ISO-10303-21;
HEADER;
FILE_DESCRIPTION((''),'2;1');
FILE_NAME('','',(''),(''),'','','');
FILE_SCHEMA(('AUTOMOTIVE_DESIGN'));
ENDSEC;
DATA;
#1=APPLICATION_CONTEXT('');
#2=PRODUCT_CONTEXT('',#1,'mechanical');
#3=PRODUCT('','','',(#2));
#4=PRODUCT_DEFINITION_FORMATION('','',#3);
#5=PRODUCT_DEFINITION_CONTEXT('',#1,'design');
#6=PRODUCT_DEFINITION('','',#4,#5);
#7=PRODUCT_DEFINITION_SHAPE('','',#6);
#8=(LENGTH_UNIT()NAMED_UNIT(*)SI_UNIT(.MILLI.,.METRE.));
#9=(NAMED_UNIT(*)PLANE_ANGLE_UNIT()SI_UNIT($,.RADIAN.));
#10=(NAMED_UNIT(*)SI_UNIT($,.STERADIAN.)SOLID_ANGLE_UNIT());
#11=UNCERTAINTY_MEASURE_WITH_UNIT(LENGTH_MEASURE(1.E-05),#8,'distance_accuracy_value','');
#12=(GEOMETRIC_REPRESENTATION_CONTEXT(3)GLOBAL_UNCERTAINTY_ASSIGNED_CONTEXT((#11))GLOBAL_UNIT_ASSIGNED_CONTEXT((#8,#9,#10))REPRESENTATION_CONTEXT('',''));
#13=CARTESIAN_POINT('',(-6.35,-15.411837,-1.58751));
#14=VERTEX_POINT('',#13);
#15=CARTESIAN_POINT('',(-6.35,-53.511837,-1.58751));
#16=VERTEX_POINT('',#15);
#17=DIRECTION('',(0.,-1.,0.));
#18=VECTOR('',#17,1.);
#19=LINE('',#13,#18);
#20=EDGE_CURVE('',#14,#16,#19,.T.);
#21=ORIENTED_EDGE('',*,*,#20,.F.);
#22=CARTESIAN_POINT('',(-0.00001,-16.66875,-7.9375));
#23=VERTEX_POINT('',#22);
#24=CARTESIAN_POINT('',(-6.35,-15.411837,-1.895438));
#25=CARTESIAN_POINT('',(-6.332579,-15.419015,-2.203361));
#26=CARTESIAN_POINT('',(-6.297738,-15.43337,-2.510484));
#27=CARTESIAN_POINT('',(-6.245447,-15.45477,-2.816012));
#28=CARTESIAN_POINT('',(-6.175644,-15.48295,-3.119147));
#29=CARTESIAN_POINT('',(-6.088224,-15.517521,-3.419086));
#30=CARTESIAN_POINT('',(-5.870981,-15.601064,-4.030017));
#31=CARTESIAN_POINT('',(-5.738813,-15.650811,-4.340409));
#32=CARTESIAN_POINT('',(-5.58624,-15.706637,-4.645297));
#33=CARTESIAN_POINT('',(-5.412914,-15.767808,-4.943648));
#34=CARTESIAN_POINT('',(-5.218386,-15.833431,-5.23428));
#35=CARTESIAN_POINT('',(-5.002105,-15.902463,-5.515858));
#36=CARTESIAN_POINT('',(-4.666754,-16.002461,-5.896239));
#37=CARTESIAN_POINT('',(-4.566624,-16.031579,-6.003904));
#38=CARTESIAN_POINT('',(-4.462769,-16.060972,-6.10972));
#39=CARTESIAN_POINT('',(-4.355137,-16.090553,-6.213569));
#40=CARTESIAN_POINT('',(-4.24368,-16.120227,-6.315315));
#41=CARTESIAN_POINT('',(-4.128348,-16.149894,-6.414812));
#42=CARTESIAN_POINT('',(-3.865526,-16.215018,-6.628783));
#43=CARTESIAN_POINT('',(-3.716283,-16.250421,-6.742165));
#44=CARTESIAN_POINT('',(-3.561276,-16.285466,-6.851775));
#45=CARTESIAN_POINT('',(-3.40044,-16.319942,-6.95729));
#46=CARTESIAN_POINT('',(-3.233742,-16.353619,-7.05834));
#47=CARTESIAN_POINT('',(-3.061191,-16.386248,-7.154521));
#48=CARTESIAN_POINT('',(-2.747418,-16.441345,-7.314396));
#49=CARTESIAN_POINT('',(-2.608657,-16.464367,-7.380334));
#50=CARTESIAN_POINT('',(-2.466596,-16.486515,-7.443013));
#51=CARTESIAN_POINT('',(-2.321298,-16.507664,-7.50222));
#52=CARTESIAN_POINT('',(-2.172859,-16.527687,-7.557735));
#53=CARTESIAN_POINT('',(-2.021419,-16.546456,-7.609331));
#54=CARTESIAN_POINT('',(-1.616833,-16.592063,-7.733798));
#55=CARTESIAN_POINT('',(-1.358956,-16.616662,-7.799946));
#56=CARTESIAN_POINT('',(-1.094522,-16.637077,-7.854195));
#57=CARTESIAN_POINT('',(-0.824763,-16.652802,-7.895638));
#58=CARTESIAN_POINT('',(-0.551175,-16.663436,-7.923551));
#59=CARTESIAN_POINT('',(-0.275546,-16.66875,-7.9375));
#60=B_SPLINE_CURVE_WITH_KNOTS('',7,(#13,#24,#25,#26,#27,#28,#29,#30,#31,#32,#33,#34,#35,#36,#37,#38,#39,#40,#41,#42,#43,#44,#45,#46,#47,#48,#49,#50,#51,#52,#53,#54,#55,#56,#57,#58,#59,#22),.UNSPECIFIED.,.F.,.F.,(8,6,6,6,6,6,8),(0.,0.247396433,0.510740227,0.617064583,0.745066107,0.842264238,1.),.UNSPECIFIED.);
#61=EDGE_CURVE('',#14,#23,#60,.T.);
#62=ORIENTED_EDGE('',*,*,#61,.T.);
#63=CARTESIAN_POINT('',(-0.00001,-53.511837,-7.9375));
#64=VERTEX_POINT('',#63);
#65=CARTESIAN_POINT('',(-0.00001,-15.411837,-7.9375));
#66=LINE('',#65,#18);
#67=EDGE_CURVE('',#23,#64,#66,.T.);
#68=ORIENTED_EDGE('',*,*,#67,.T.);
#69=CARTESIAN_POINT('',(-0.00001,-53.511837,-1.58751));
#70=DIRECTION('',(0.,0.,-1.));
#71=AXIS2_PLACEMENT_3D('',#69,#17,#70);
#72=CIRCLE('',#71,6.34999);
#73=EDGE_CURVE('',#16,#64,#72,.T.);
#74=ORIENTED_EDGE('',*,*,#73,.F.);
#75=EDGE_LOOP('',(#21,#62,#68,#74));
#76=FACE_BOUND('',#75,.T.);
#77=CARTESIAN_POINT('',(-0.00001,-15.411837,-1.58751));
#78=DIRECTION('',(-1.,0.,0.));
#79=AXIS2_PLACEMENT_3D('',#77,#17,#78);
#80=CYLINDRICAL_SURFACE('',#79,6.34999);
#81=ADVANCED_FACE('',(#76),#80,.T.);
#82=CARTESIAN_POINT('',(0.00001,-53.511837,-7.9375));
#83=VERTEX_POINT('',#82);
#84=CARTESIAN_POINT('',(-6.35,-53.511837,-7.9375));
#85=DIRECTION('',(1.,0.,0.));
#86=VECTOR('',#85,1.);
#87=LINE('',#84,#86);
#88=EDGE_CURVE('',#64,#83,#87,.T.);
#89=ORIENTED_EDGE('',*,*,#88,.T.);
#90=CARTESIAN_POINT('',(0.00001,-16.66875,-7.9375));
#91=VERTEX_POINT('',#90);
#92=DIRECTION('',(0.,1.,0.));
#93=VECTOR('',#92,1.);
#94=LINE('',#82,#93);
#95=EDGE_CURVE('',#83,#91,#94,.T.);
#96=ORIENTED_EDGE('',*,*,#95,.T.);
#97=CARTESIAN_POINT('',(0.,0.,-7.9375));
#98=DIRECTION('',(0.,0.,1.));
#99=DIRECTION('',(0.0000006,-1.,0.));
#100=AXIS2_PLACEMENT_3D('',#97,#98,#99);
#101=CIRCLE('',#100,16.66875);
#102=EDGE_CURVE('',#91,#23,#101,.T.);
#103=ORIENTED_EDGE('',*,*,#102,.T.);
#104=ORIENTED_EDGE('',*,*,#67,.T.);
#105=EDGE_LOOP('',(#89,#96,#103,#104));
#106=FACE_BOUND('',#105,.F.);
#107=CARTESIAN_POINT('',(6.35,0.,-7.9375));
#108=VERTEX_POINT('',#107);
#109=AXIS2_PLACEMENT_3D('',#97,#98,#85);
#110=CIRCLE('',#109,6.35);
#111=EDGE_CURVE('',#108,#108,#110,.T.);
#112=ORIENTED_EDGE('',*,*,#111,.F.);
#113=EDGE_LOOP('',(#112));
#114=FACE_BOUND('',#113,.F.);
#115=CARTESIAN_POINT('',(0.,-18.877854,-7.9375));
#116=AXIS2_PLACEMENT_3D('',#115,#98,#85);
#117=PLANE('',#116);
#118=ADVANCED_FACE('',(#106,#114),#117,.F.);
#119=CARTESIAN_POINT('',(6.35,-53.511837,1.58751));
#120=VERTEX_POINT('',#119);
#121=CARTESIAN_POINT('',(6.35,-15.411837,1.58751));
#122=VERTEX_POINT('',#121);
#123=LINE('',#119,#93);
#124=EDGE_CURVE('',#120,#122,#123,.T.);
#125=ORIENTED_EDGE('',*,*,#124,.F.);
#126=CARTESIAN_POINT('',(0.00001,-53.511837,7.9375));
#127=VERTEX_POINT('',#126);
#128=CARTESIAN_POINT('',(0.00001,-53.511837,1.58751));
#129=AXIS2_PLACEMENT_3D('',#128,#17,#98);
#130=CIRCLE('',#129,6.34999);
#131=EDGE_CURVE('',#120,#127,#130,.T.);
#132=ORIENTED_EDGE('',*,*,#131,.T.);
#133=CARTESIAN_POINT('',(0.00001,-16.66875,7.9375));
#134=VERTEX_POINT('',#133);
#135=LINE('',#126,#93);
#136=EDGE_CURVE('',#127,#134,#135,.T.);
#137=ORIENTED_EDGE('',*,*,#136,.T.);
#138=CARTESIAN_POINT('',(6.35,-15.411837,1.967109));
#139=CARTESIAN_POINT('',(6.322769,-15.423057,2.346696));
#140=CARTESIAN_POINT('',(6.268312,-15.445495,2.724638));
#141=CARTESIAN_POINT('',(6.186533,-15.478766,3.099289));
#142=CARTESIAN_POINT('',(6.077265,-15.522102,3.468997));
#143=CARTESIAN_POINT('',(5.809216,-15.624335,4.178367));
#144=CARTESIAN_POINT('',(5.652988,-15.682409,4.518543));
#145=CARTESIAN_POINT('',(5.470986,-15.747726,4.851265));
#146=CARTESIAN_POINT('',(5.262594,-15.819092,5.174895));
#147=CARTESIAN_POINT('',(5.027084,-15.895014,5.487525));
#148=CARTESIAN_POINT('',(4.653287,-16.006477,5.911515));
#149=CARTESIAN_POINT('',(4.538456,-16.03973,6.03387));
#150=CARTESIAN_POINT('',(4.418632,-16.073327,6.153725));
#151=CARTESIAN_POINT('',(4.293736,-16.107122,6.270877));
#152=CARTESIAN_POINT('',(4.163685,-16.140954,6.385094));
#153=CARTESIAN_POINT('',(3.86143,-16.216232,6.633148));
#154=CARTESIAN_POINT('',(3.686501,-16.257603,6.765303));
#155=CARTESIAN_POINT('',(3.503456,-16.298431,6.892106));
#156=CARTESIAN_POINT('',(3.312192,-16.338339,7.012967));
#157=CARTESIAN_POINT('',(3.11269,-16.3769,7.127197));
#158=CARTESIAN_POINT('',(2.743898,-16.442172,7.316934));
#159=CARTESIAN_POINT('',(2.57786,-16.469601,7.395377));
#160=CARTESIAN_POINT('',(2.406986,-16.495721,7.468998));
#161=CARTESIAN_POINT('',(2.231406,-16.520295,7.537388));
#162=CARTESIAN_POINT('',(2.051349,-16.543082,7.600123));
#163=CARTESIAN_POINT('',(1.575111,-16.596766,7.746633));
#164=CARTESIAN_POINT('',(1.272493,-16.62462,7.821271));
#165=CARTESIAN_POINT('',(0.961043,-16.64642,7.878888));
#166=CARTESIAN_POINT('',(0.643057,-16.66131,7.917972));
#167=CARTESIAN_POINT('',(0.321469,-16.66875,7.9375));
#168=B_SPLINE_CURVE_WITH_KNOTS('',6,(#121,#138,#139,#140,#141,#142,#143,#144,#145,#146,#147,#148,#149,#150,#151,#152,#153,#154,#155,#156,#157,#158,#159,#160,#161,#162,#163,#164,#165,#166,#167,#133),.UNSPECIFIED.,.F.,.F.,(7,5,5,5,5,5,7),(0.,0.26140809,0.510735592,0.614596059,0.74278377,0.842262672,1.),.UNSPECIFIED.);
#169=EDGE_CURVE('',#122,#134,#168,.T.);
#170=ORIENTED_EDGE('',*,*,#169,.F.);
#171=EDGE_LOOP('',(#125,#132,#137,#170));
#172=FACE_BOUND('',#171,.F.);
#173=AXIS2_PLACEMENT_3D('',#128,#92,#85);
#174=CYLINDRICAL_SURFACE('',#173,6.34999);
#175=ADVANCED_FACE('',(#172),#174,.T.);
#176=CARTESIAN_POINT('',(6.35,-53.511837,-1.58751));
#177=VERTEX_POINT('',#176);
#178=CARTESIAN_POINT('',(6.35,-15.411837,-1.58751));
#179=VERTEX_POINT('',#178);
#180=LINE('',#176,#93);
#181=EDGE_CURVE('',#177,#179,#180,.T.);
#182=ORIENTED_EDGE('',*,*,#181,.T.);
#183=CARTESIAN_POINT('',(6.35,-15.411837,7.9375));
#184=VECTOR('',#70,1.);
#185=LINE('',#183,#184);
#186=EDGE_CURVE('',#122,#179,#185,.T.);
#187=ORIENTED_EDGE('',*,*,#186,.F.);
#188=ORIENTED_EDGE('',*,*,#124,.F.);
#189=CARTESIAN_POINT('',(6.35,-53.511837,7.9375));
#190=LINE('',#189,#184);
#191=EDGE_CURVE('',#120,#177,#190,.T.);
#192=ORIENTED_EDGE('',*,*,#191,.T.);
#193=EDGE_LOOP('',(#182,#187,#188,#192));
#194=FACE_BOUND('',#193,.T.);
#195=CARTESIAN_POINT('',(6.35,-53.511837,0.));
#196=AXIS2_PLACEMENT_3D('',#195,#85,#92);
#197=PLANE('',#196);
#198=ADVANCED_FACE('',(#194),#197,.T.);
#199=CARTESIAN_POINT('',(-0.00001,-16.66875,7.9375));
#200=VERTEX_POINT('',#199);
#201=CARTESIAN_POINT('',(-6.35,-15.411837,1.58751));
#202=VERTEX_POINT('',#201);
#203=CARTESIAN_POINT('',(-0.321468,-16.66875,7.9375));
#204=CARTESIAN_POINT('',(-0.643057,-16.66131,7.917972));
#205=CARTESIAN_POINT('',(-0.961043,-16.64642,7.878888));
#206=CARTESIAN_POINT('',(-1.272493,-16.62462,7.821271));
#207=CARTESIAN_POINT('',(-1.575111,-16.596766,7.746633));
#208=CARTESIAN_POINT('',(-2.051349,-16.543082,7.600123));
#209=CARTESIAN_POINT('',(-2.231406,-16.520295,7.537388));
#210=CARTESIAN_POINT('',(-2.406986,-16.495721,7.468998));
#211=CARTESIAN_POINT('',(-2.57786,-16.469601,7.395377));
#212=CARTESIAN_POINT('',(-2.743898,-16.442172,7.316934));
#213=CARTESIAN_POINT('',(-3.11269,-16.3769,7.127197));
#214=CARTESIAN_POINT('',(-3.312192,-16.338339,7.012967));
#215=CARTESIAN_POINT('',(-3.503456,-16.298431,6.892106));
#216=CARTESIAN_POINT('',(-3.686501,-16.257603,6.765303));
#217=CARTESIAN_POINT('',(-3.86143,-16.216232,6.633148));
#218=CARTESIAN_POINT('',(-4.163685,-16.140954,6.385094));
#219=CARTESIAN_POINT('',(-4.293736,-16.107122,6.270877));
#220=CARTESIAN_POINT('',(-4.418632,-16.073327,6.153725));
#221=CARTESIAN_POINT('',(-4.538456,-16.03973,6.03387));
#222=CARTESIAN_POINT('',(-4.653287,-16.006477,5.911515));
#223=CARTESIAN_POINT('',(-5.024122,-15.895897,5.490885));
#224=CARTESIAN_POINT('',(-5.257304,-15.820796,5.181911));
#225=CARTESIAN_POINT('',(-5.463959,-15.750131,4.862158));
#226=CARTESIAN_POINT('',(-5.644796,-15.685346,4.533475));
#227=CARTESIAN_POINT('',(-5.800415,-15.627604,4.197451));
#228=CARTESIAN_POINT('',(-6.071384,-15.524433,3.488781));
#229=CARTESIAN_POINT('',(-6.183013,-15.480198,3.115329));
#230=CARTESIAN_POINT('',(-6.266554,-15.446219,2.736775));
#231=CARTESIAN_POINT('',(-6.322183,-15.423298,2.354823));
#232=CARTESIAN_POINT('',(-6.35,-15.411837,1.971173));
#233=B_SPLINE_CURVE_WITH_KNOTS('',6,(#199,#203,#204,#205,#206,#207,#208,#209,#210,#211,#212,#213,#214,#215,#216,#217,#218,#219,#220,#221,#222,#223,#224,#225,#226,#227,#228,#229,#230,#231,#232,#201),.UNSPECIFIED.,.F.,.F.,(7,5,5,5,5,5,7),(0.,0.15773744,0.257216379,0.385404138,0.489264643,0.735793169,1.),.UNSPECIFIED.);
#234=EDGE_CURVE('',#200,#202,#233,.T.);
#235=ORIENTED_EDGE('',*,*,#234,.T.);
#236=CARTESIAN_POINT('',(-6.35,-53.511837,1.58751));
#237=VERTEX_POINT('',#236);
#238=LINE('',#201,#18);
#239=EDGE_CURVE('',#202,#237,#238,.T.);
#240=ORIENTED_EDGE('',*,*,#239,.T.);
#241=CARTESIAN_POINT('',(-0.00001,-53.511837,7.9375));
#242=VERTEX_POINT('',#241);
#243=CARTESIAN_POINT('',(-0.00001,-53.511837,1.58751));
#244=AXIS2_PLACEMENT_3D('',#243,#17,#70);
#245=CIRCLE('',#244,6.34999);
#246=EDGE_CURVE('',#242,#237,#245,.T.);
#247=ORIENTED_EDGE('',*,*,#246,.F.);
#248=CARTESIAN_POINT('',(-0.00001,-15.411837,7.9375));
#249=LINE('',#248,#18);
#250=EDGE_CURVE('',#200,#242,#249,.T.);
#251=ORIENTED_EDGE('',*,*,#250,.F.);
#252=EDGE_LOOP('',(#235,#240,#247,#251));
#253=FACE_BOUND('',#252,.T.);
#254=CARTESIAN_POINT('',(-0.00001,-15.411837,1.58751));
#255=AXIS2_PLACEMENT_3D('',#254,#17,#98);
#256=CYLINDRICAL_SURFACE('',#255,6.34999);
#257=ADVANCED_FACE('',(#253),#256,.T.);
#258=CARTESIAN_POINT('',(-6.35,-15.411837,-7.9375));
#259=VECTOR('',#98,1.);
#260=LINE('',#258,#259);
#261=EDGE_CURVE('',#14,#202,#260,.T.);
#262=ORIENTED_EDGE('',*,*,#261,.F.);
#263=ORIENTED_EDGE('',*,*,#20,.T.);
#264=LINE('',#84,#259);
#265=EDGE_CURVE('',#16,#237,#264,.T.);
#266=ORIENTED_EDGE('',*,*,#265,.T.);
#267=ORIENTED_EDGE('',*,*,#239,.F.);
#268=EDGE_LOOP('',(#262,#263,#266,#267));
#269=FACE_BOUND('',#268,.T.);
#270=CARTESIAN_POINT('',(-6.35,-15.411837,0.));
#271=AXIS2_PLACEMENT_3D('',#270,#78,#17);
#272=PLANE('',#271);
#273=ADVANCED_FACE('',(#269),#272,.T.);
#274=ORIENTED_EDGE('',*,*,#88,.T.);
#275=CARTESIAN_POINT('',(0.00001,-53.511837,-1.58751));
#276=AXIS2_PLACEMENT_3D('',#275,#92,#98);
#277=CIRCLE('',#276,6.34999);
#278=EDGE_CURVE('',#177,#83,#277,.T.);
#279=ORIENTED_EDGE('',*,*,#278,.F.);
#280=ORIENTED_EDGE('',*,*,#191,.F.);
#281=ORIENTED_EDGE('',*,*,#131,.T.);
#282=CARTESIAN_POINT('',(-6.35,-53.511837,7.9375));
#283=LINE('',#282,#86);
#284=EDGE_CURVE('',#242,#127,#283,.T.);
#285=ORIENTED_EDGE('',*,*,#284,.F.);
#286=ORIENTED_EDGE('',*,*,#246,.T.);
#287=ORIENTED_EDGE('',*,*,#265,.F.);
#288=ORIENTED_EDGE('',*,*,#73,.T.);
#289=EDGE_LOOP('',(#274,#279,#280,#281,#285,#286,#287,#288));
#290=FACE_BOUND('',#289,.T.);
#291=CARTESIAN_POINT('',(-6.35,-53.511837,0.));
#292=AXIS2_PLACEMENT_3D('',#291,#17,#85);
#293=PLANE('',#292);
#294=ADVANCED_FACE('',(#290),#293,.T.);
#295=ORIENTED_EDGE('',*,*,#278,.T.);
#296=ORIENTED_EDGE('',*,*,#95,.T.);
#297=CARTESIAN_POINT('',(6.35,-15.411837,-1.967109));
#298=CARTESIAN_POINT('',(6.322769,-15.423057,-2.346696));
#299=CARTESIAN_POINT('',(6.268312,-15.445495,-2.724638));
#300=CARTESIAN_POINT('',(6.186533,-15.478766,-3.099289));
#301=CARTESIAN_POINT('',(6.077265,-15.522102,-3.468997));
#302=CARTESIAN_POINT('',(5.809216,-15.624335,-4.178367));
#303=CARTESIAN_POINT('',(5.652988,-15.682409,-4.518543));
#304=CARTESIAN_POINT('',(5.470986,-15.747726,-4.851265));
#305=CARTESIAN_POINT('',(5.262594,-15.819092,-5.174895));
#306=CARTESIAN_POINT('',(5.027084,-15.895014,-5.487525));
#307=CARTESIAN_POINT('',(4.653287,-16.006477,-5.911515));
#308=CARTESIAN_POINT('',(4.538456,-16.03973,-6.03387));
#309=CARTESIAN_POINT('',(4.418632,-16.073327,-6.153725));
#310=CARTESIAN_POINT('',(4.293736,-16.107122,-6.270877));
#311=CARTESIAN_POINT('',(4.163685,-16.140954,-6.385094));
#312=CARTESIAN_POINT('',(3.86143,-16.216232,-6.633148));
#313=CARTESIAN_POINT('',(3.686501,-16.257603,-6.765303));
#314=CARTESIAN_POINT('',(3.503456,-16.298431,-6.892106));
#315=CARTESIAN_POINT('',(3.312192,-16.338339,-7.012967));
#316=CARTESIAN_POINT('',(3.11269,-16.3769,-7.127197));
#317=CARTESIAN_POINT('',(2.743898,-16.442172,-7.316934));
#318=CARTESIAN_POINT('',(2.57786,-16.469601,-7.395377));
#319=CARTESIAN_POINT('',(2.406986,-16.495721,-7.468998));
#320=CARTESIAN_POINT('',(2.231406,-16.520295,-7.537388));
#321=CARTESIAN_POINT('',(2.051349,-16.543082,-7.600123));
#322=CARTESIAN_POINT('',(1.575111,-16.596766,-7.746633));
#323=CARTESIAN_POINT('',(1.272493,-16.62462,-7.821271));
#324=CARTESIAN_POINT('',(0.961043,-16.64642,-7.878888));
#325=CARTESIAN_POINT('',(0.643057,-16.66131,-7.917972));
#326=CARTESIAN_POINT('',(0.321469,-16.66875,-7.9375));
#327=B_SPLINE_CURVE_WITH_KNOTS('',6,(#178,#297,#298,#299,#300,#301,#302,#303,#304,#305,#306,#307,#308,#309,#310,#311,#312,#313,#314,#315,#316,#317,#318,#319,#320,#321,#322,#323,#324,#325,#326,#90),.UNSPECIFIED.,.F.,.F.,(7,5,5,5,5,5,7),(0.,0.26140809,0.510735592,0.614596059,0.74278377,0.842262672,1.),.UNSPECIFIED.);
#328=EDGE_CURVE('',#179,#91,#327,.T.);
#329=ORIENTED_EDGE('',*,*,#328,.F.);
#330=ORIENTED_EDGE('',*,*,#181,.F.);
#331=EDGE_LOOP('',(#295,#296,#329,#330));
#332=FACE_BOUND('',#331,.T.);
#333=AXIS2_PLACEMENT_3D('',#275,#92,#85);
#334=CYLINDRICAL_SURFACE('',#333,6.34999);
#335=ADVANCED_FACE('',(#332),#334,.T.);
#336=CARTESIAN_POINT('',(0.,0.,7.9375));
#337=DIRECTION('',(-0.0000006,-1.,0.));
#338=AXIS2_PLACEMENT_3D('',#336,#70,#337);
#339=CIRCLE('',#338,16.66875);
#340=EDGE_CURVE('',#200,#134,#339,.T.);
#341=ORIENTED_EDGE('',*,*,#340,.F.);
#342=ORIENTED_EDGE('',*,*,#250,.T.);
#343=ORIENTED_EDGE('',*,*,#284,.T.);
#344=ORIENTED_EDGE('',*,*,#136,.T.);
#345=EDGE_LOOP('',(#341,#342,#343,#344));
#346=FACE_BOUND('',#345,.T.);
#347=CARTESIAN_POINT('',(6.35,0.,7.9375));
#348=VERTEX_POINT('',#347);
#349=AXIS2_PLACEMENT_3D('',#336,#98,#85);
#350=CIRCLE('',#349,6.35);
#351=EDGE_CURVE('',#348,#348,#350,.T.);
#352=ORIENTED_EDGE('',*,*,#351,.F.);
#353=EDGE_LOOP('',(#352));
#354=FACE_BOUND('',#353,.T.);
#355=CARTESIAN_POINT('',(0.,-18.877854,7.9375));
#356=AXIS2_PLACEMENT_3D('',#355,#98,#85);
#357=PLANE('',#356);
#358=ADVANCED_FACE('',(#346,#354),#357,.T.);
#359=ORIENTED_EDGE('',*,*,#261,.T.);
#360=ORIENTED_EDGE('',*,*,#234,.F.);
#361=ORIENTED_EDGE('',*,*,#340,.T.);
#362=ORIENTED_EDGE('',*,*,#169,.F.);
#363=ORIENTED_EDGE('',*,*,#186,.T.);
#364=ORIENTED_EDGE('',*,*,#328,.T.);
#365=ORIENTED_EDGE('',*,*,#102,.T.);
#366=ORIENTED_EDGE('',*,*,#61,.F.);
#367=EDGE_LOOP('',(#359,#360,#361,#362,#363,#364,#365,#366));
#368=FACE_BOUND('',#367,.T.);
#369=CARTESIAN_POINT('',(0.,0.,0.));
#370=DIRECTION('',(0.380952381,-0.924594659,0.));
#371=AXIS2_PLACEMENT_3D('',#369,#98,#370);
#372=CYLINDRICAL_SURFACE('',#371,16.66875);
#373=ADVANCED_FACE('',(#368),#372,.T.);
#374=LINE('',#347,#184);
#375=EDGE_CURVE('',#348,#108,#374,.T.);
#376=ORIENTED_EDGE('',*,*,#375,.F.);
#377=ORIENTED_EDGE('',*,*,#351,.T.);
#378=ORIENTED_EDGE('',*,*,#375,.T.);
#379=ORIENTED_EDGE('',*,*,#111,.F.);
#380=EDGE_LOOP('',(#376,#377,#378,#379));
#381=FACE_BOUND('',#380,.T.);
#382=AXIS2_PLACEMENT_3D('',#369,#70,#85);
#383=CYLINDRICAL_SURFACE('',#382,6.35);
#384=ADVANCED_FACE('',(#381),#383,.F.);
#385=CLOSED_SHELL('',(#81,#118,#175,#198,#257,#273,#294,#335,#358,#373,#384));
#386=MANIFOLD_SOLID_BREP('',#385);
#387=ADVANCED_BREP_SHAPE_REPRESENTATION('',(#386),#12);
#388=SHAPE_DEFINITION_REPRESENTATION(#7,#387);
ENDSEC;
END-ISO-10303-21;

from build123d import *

# Parameters (mm, degrees)
F1_R     = 6.35
F2_DEPTH = 7.9375
F3_R     = 6.34999


# Not quite as in the source:
# - a fillet or chamfer is up to 0.001 mm smaller than in the source, because OpenCascade refuses the exact size


with BuildPart() as f2:
    # F1 (on Top) → F2 (new body, symmetric)
    with BuildSketch(Plane.XY):
        with BuildLine():
            ThreePointArc((6.35, -15.4118372222), (0, 16.66875), (-6.35, -15.4118372222))
            Line((-6.35, -15.4118372222), (-6.35, -53.5118372222))
            Line((-6.35, -53.5118372222), (6.35, -53.5118372222))
            Line((6.35, -53.5118372222), (6.35, -15.4118372222))
        make_face()
        Circle(F1_R, mode=Mode.SUBTRACT)
    extrude(amount=F2_DEPTH, both=True)

    # F3 (radius 6.35 in the source; OpenCascade refuses exactly that, so slightly less here)
    f3_edges = [f2.edges().sort_by_distance(p)[0] for p in [
        (-6.35, -34.461837, -7.9375),
        (6.35, -34.461837, -7.9375),
        (-6.35, -34.461837, 7.9375),
        (6.35, -34.461837, 7.9375),
    ]]
    fillet(f3_edges, radius=F3_R)


solid = f2.part
